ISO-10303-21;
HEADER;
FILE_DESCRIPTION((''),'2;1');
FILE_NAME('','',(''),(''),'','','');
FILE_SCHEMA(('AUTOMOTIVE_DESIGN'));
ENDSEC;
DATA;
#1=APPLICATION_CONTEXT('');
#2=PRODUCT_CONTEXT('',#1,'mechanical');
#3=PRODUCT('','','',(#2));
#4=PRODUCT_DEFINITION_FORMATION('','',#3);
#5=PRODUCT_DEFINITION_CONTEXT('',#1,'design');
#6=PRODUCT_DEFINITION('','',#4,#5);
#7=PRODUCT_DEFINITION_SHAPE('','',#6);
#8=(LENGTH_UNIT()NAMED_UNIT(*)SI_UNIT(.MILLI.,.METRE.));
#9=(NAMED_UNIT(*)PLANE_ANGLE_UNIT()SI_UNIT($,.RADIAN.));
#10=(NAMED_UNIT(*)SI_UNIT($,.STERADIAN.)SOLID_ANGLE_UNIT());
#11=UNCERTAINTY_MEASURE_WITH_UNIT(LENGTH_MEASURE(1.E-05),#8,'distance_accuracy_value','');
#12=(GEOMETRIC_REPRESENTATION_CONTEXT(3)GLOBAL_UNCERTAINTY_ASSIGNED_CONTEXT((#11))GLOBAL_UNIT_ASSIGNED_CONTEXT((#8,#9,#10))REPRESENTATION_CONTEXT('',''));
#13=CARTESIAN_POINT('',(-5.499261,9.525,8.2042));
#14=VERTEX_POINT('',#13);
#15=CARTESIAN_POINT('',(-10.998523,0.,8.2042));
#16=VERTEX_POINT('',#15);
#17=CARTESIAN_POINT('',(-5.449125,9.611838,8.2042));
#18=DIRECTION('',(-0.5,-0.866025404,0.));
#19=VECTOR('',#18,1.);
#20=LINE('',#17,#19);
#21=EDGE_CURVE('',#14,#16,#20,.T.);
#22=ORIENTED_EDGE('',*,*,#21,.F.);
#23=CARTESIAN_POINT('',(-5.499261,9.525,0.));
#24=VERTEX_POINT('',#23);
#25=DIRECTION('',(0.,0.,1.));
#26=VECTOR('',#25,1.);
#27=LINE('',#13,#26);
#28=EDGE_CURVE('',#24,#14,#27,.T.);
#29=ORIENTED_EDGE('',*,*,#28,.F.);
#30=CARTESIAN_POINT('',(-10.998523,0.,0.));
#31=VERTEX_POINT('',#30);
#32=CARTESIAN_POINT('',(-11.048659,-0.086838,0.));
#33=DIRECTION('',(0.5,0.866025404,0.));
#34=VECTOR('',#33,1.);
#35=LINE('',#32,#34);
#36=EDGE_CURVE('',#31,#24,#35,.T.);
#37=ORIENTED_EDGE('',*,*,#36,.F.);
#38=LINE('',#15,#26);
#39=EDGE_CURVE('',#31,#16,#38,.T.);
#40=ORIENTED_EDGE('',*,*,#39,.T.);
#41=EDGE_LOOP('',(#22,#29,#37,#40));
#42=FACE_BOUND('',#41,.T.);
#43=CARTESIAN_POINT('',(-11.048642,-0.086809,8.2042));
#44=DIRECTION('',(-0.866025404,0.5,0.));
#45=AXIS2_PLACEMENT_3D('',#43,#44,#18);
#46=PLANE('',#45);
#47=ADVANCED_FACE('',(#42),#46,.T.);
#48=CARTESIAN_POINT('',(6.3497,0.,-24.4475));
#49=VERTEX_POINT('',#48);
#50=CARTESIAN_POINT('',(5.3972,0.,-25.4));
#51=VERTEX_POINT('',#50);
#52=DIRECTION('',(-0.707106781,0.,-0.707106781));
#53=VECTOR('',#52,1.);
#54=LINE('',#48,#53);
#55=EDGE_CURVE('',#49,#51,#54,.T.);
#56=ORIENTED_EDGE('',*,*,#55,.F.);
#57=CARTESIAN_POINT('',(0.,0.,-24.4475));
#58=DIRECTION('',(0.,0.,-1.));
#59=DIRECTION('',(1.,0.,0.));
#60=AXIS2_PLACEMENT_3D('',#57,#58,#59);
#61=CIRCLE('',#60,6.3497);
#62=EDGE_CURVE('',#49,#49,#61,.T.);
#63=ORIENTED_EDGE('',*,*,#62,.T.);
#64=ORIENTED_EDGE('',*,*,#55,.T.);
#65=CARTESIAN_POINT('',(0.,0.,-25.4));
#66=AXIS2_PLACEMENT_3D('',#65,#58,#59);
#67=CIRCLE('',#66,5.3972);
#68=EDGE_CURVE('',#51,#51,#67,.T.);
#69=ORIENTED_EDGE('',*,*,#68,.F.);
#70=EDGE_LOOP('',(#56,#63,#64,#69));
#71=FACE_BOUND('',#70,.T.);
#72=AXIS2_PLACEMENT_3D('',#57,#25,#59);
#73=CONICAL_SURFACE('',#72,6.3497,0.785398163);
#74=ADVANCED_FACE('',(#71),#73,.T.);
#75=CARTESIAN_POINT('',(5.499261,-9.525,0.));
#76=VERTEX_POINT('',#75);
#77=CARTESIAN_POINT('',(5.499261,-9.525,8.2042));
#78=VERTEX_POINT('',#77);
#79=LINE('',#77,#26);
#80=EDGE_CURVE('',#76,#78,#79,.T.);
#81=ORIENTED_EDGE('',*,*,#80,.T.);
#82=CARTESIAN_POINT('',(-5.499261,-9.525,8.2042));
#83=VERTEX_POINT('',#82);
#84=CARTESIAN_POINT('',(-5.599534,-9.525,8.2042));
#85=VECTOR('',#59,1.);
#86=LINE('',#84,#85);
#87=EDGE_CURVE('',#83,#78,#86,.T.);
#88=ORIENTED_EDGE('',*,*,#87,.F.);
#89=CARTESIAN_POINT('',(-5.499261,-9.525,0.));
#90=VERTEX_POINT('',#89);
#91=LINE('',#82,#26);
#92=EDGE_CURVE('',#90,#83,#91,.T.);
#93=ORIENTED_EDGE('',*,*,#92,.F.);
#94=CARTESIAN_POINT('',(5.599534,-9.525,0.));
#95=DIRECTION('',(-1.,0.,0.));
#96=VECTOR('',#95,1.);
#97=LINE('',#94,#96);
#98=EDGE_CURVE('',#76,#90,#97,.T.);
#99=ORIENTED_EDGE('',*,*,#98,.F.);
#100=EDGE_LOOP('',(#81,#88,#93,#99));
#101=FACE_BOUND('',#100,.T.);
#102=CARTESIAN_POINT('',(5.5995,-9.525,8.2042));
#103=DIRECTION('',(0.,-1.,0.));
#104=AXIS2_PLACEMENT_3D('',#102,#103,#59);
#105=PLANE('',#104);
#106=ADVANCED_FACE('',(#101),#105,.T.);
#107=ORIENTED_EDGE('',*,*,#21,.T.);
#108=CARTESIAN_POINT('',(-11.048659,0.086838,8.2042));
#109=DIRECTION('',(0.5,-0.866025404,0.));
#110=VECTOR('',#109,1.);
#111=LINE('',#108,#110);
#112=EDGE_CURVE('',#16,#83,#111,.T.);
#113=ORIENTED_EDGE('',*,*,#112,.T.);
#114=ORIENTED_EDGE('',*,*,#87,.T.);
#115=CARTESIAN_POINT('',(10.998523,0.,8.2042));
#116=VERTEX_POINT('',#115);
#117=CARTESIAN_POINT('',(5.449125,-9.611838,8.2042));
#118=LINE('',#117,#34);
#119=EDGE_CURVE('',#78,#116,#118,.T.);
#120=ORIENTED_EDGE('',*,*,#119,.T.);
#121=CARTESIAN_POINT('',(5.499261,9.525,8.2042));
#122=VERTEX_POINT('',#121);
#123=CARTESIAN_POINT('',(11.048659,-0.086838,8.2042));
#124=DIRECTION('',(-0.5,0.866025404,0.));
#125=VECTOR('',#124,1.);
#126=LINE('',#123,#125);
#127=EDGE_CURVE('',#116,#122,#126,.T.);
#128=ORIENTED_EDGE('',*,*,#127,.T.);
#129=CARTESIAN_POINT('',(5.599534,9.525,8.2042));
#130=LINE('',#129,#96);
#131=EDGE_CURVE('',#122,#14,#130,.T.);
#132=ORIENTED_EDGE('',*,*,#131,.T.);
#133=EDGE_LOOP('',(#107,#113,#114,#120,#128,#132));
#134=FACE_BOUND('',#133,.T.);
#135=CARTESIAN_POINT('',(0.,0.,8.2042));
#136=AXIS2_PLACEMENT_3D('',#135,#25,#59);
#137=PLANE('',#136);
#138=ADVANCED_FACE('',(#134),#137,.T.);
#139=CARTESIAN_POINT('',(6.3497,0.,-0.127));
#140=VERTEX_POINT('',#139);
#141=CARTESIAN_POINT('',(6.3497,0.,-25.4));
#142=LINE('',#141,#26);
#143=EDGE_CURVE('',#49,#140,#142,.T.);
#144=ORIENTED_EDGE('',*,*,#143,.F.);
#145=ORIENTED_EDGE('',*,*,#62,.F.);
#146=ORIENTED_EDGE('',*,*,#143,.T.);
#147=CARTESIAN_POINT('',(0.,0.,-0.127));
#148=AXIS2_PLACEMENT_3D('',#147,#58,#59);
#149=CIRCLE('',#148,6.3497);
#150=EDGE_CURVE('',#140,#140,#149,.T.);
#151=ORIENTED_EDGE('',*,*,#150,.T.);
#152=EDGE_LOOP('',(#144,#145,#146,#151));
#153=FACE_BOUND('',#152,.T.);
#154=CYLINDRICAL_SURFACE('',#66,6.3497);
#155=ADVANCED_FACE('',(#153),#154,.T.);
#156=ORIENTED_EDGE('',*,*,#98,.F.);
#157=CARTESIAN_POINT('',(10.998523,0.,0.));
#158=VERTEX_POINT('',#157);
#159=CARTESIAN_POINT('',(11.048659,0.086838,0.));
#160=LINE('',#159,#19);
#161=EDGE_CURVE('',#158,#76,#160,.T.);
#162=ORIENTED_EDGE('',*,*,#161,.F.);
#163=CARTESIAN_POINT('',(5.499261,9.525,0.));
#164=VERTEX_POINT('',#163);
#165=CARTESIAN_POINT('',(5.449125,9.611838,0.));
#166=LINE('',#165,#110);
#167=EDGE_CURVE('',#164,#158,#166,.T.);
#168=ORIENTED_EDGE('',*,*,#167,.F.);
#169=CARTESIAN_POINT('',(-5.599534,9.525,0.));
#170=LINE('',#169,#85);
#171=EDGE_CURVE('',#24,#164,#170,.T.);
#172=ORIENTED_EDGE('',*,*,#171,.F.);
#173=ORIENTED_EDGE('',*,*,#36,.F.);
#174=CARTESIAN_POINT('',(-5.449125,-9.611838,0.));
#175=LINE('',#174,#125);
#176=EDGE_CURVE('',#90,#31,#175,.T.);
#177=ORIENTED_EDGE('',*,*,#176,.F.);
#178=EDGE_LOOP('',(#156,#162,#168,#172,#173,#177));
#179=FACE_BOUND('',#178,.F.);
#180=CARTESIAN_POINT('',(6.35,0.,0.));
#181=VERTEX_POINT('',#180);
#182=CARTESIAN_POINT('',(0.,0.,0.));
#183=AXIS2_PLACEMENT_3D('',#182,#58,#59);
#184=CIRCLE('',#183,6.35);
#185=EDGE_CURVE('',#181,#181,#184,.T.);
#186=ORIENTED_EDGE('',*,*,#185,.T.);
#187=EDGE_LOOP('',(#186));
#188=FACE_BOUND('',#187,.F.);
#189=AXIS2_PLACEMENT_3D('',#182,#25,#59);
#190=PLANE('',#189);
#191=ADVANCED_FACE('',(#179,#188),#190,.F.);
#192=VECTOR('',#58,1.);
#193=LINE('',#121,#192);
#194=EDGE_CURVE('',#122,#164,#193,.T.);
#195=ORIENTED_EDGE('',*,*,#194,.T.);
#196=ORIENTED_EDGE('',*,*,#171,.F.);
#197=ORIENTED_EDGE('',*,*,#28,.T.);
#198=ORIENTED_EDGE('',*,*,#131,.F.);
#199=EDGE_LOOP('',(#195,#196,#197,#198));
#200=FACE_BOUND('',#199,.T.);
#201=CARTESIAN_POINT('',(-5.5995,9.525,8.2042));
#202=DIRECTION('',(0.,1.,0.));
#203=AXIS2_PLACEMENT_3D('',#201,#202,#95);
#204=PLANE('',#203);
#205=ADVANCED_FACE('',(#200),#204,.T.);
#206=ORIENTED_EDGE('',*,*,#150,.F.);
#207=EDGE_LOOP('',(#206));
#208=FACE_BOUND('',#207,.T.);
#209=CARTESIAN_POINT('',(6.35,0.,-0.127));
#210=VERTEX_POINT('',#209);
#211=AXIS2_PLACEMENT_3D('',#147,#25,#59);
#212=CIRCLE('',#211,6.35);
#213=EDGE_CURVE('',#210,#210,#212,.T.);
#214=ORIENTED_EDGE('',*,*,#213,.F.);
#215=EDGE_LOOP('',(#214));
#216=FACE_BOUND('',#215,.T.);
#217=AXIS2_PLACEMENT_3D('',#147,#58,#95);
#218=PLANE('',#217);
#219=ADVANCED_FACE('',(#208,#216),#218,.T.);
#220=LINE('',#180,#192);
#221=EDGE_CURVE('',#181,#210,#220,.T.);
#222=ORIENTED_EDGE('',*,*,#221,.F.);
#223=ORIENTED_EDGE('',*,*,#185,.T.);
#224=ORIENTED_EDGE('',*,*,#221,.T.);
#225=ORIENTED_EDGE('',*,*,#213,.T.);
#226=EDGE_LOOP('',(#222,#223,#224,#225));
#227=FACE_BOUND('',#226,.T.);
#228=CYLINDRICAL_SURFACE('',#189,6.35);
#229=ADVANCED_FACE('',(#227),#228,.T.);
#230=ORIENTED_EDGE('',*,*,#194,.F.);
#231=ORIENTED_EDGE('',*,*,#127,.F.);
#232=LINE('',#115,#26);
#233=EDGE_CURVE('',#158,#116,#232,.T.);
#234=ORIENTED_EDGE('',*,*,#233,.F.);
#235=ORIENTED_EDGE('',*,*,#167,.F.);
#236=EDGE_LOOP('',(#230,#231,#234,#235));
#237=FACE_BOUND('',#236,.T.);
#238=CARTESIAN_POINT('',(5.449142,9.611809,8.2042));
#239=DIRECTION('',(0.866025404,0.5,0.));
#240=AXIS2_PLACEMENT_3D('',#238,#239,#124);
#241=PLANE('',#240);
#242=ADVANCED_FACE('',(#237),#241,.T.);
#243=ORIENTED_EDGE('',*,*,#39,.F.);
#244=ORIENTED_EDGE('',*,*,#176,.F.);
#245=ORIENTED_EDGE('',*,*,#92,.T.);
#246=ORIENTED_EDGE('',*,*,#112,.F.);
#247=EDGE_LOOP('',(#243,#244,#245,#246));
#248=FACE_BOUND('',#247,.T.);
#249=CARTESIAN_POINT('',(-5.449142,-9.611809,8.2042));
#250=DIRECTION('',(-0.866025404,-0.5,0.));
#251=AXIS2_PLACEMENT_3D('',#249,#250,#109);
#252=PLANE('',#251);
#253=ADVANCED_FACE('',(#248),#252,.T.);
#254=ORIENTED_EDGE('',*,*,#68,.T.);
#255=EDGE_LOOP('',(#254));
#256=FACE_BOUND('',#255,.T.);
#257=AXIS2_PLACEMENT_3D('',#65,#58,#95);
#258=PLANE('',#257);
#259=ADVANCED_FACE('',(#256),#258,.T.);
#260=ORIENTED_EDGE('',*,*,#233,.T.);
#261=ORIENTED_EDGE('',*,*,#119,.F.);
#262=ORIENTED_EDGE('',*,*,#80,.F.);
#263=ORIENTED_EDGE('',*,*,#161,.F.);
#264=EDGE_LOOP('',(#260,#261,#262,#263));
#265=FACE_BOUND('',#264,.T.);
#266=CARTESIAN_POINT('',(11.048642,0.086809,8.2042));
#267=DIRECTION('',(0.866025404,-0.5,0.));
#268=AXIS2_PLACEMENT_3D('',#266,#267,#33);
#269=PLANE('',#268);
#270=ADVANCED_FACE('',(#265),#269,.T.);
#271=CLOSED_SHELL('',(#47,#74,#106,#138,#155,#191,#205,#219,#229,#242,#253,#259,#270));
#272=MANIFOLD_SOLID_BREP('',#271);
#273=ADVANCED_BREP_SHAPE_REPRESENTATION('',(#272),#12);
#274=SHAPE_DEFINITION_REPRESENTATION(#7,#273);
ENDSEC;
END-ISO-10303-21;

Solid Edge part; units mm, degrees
sketch "Sketch1" plane through (0, 0, 0) normal (0, 0, 1) x (1, 0, 0)
  circle A0 centre (0, 0) radius 11.049
  dimension "D1" = 22.098
extrude "Protrusion1" add sketch "Sketch1" along normal blind 8.2042
sketch "Sketch2" plane through (0, 0, 0) normal (0, 0, -1) x (1, 0, 0)
  circle A0 centre (0, 0) radius 6.35
extrude "Protrusion2" add sketch "Sketch2" along normal blind 25.4
sketch "Sketch3" plane through (0, 0, -25.4) normal (0, 0, -1) x (1, 0, 0)
  circle A0 centre (0, 0) radius 6.3497
extrude "Cutout1" cut sketch "Sketch3" against normal blind 25.273 flip side to cut
chamfer "Chamfer_1" distance 0.9525 angle 45 1 edges at (-6.3497, 0, -25.4)
sketch "Sketch4" plane through (0, 0, 8.2042) normal (0, 0, 1) x (1, 0, 0)
  line L0 (-5.5995, 9.525) -> (5.5995, 9.525)
  dimension "D1" = 19.05
extrude "Cutout2" cut sketch "Sketch4" against normal up to next material side at (0, 9.575, 8.2042)
pattern_circular "Pattern1" count 6 over 360 about axis through (0, 0, 8.2042) along (0, 0, 1) of "Cutout2"
properties part number "24103213"
